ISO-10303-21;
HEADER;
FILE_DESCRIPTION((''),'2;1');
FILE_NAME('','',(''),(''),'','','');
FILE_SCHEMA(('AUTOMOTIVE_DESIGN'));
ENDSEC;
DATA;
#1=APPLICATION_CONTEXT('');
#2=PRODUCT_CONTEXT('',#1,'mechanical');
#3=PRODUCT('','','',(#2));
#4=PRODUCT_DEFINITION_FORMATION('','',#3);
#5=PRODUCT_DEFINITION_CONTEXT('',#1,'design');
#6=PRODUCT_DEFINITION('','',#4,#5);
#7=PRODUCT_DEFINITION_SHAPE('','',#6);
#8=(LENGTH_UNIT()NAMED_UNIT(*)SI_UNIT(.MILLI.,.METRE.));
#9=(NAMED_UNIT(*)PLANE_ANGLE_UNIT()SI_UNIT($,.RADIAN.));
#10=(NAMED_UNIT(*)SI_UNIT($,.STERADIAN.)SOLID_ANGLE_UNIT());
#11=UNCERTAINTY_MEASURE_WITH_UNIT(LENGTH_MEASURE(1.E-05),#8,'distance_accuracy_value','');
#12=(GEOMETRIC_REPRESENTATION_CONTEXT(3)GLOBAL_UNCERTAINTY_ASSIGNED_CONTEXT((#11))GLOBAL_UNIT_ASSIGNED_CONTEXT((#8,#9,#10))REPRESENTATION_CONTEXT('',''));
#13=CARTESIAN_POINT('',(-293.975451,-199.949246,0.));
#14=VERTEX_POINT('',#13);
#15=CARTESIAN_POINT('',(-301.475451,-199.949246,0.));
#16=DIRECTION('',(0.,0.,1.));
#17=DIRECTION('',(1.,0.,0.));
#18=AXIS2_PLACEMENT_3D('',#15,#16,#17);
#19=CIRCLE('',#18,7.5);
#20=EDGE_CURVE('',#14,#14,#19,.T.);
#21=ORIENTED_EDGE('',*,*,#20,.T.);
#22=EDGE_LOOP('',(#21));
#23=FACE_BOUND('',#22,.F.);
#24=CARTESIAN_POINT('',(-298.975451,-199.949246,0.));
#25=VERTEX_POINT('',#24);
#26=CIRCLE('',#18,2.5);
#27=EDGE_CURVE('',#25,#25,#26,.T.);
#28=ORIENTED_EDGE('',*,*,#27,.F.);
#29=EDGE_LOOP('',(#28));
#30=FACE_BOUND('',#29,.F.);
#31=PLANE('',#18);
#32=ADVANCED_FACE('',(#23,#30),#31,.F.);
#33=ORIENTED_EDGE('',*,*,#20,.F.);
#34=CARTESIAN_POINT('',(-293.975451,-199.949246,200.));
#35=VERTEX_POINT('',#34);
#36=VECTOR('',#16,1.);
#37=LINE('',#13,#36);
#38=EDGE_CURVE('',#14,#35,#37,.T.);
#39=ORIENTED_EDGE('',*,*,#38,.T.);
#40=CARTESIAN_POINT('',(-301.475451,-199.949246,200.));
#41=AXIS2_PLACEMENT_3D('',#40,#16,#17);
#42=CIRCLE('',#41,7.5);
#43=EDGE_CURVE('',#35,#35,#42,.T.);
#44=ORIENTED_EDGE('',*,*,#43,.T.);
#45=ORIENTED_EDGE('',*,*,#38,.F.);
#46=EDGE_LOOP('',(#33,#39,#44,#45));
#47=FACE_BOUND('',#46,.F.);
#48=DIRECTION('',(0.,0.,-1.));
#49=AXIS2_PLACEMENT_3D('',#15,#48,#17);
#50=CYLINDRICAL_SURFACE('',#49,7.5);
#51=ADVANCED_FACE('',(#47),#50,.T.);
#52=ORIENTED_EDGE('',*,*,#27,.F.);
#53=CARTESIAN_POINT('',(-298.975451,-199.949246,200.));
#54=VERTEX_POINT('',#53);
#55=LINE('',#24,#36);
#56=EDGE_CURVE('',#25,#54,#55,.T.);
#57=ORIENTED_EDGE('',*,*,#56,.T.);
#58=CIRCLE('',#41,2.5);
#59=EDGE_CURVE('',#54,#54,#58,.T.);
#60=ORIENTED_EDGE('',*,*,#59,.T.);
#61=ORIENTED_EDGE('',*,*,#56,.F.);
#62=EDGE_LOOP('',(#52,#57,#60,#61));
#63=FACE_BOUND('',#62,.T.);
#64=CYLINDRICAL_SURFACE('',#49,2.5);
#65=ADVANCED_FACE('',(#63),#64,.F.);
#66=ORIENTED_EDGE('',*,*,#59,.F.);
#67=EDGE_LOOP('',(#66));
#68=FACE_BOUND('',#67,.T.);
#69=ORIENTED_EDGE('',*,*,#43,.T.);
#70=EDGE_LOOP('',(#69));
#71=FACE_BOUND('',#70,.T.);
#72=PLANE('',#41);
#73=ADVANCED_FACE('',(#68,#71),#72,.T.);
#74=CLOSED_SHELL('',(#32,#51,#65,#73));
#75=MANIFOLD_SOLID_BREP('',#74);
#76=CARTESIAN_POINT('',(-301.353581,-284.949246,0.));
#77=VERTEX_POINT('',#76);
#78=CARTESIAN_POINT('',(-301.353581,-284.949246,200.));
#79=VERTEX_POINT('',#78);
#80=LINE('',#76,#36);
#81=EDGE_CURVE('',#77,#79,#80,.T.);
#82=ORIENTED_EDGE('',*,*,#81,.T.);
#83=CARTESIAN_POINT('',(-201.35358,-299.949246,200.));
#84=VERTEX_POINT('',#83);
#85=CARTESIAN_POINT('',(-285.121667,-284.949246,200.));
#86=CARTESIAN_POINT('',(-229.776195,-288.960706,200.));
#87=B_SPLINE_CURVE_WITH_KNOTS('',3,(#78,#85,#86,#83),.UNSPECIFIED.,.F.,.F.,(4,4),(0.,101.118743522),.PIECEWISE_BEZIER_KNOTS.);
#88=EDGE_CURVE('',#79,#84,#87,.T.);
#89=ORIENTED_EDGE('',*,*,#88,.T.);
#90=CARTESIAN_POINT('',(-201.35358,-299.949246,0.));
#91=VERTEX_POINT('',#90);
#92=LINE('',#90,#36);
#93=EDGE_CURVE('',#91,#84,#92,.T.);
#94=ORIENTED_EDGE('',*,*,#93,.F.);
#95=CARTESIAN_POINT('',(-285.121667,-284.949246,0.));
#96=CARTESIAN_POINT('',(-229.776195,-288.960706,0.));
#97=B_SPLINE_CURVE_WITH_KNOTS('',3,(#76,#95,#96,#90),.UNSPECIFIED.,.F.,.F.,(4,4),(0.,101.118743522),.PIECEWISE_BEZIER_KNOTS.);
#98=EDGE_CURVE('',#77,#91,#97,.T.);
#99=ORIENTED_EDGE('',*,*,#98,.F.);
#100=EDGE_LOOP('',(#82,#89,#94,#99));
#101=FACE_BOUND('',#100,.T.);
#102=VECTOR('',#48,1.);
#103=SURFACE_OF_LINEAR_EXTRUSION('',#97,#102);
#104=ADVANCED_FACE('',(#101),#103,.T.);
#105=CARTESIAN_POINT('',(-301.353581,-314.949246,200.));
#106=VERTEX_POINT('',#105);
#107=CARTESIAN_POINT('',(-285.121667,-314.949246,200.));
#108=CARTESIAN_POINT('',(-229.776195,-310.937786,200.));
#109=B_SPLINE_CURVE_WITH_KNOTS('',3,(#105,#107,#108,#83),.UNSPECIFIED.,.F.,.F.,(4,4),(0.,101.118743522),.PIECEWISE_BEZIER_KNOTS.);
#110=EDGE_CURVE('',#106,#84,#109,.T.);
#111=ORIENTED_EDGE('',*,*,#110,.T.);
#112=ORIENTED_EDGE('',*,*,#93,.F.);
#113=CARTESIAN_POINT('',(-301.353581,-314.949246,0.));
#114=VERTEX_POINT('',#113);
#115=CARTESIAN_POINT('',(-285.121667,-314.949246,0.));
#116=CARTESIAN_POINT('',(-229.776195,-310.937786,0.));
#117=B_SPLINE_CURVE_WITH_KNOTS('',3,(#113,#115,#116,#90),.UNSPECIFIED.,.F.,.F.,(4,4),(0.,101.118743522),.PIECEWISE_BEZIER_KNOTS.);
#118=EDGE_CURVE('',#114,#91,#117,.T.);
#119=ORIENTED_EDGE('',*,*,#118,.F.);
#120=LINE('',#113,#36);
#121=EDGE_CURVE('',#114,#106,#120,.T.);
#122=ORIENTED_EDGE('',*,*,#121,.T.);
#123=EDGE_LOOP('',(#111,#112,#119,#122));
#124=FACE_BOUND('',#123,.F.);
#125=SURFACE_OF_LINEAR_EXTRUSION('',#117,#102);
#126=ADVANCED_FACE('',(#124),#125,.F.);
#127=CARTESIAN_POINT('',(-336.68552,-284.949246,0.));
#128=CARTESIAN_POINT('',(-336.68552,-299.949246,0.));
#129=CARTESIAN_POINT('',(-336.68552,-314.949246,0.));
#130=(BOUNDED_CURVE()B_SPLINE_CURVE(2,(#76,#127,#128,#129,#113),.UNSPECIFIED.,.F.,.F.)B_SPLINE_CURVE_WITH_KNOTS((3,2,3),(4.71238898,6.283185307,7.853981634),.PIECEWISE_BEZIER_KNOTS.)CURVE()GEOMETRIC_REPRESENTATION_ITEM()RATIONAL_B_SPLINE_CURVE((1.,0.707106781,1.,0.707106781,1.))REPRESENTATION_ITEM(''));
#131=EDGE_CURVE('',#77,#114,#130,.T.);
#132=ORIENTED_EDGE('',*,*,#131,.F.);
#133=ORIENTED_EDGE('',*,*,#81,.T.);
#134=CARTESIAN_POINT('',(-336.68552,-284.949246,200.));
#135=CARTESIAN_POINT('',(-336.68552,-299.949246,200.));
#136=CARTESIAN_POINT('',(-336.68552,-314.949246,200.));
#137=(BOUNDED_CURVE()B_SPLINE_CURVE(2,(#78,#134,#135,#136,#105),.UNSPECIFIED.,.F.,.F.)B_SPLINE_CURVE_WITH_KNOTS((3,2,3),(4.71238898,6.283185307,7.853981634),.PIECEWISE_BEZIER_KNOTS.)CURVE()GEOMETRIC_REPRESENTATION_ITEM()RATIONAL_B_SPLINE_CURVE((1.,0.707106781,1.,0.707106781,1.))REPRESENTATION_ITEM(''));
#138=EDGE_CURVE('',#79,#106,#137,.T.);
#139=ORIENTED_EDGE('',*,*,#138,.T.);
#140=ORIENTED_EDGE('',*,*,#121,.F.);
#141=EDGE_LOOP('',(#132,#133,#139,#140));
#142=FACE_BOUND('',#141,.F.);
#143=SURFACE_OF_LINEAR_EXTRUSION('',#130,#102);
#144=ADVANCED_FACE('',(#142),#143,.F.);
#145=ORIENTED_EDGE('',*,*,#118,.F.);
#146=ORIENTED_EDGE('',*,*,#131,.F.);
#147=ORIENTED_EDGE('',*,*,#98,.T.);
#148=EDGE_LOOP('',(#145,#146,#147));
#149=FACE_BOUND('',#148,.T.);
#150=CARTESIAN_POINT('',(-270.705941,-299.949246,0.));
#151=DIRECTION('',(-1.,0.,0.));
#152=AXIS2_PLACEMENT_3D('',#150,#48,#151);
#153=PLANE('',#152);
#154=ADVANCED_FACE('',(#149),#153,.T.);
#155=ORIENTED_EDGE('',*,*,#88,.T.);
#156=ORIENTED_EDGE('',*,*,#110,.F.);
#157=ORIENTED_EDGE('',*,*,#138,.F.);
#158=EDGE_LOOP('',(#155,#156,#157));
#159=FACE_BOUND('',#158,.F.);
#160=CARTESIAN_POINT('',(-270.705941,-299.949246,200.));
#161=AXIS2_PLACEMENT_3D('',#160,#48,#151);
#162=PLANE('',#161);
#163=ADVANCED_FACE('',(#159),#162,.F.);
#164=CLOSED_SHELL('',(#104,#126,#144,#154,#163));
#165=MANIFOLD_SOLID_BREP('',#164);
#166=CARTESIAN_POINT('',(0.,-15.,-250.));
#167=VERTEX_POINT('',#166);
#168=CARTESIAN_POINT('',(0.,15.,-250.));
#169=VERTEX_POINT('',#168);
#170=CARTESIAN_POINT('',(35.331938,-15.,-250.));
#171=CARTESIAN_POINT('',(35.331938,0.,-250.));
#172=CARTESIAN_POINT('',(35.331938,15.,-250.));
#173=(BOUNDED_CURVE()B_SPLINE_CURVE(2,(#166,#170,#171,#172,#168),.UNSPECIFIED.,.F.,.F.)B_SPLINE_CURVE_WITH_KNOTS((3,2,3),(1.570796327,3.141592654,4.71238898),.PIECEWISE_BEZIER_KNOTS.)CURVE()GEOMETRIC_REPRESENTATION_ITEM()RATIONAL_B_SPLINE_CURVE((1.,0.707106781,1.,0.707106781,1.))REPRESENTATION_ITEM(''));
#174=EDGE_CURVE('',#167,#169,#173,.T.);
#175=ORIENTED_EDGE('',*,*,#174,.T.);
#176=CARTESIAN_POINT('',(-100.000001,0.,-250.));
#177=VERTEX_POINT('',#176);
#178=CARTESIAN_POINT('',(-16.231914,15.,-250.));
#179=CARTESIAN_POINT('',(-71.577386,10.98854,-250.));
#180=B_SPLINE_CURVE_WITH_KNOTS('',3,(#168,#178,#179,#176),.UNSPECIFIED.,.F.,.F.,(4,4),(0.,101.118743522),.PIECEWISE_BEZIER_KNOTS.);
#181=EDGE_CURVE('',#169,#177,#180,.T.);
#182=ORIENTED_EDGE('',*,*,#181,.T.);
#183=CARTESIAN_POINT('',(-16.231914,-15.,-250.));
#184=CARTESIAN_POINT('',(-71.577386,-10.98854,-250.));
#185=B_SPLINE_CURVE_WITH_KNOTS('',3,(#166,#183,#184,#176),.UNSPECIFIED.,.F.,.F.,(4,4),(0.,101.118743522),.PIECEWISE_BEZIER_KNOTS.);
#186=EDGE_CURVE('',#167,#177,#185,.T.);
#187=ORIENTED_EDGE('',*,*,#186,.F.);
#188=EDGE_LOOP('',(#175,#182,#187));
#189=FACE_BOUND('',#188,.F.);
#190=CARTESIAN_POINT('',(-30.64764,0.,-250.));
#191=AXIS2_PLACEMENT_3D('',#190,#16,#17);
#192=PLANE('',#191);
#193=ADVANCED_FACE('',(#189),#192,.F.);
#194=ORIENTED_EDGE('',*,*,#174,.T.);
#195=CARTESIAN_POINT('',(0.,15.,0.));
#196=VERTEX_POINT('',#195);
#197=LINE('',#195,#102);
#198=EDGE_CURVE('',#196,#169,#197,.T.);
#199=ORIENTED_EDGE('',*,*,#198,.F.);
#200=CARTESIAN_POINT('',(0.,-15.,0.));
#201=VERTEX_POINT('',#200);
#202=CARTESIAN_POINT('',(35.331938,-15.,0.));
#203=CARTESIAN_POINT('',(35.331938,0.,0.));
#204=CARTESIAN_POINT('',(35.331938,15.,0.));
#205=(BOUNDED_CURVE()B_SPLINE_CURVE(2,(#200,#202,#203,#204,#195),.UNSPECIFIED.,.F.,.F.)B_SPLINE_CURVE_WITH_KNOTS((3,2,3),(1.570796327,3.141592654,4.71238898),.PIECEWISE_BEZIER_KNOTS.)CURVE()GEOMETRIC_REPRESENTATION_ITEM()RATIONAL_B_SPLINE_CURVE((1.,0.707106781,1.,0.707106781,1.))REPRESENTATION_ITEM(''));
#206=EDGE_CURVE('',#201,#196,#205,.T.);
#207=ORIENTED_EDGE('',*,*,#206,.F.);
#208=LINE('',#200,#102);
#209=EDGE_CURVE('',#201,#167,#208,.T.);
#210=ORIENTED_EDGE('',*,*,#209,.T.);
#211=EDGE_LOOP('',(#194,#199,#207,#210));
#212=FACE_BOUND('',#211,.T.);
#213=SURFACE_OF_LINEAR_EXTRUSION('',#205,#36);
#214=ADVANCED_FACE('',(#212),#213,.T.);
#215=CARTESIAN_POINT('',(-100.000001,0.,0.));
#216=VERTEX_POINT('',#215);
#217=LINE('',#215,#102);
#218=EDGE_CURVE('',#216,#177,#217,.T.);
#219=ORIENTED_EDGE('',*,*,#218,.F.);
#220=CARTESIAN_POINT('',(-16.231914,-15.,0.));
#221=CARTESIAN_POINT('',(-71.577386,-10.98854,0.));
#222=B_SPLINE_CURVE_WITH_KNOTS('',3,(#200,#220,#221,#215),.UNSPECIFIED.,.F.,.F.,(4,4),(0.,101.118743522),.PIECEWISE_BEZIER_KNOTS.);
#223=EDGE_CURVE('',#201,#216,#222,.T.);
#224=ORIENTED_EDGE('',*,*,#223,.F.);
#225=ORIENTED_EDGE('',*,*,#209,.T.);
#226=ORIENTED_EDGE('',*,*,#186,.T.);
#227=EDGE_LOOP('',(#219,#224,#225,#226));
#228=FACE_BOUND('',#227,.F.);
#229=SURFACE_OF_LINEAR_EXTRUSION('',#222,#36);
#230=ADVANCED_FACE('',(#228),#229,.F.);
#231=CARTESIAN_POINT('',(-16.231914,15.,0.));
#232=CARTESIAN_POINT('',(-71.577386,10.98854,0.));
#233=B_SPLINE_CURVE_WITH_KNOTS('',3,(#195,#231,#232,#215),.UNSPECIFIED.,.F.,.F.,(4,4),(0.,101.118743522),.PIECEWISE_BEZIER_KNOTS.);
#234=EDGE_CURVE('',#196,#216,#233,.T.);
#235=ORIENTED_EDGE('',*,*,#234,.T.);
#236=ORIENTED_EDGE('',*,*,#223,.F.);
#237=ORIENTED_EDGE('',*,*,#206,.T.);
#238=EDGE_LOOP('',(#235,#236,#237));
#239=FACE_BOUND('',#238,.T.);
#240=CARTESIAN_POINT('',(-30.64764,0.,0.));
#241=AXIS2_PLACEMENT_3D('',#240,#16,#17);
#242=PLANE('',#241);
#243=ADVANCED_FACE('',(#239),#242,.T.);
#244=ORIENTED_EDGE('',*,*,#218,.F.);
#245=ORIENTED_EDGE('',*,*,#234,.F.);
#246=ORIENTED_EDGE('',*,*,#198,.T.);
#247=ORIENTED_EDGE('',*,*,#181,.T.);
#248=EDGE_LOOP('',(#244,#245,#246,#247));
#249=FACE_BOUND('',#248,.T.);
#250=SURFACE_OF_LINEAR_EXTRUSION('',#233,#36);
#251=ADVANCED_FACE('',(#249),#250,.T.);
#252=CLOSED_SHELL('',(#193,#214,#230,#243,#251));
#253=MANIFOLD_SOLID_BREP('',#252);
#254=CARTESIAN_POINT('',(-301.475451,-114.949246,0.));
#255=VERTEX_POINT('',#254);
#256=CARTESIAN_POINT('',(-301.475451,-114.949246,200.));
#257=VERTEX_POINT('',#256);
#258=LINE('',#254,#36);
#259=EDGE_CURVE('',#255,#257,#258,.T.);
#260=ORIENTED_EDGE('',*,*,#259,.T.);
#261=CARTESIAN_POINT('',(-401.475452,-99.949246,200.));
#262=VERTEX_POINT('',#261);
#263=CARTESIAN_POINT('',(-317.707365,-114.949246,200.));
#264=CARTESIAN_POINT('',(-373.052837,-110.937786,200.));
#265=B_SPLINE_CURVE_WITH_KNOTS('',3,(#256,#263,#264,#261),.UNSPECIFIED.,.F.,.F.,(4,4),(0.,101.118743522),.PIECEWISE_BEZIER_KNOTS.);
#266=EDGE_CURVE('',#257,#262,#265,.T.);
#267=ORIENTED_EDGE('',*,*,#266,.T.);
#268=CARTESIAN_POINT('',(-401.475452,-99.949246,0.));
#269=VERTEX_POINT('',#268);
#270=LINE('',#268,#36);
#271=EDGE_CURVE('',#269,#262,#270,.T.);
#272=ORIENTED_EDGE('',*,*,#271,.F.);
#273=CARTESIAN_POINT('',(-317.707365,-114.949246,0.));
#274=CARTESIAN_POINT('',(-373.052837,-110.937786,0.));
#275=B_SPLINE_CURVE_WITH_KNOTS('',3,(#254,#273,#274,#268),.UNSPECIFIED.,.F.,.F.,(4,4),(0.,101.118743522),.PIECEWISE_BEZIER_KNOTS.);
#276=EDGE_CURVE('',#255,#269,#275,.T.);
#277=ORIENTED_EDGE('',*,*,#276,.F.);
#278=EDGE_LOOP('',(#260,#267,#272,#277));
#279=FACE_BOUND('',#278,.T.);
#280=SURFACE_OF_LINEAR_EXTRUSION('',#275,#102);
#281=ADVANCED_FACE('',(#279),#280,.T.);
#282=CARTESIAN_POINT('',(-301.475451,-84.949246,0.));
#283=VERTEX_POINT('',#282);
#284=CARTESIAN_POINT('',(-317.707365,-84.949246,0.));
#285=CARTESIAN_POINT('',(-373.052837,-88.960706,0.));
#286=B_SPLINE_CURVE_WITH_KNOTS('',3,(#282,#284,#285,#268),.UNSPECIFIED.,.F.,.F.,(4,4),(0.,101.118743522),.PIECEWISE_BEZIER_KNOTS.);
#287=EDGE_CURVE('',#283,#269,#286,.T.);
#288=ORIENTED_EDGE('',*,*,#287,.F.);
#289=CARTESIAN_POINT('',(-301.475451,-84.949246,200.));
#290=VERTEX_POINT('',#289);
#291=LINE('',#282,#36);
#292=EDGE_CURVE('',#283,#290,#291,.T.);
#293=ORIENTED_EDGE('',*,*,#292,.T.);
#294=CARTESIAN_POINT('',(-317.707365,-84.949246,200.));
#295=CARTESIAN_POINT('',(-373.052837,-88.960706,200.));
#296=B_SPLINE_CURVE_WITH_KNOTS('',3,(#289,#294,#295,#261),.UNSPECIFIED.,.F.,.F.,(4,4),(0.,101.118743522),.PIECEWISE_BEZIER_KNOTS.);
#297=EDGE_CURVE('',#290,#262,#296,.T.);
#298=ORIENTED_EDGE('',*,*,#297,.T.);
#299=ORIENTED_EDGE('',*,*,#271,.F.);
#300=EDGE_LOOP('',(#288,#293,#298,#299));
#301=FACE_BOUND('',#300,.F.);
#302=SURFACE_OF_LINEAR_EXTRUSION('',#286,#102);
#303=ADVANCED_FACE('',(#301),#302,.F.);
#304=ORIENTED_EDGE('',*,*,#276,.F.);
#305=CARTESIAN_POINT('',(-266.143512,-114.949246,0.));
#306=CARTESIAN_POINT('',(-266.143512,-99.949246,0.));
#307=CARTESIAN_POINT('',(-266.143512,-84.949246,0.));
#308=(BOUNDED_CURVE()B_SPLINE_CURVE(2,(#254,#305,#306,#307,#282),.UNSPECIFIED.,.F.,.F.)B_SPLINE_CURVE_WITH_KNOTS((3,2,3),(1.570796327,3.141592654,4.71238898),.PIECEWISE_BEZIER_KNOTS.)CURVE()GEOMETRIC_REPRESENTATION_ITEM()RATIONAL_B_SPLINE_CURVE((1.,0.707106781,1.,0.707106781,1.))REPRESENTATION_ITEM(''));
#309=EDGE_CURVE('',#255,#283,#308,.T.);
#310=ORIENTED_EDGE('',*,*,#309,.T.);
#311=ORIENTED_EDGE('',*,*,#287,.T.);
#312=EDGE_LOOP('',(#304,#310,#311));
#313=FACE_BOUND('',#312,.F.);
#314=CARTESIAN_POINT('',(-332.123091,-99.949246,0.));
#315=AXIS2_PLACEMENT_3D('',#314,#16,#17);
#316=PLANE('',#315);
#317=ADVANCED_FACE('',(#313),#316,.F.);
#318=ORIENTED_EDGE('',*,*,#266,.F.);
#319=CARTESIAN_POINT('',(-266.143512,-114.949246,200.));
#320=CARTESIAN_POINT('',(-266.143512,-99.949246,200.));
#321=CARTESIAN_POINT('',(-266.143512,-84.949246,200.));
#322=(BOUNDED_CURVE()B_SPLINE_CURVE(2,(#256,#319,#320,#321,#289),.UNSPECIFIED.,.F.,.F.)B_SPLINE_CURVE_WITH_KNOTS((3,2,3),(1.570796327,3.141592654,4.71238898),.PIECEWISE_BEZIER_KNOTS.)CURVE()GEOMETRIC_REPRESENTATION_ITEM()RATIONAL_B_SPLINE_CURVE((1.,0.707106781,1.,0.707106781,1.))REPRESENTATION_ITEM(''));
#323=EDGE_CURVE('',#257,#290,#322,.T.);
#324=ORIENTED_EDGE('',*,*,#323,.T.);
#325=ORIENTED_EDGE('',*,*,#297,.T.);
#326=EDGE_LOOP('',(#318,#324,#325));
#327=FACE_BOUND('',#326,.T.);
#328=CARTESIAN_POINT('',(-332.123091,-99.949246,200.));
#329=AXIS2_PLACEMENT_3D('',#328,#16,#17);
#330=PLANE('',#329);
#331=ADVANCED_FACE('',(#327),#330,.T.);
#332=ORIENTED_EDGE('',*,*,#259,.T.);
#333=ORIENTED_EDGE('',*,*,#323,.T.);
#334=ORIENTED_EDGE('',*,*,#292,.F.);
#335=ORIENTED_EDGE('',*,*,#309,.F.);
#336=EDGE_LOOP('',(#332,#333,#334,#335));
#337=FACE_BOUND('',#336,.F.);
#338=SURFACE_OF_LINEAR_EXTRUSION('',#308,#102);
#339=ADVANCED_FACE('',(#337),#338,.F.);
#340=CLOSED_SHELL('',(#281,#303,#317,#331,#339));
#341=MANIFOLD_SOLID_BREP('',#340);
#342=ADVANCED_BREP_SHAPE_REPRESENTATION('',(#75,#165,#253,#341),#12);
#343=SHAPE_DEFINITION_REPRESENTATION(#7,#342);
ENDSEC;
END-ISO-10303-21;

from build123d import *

# Parameters (mm, degrees)
F1_DEPTH = 250
F2_DEPTH = 200
F0_R     = 7.5
F0_R_2   = 2.5


# Not quite as in the source:
# - ends of sketch curves that miss each other by under 0.0002 mm in the source are joined
# - the program builds the solid bodies; features that only make, move or delete a surface that nothing else refers to are left out


with BuildPart() as f1:
    # F0 (on Top) → F1 (new body)
    with BuildSketch(Plane.XY):
        with BuildLine():
            add(Edge.make_bspline(
                [(0, -15), (35.3319384158, -15), (35.3319384158, 0), (35.3319384158, 15), (0, 15)],
                knots=[1.5707963268, 1.5707963268, 1.5707963268, 3.1415926536, 3.1415926536, 4.7123889804, 4.7123889804, 4.7123889804], degree=2, weights=[1, 0.7071067812, 1, 0.7071067812, 1]))
            add(Edge.make_bspline(
                [(0, 15), (-16.2319140521, 15.0000000963), (-71.5773864947, 10.9885398261), (-100.0000014291, -1.909e-07)],
                knots=[0, 0, 0, 0, 101.1187435224, 101.1187435224, 101.1187435224, 101.1187435224], degree=3))
            add(Edge.make_bspline(
                [(0, -15), (-16.2319140521, -15.0000000963), (-71.5773864947, -10.9885398261), (-100.0000014291, -1.909e-07)],
                knots=[0, 0, 0, 0, 101.1187435224, 101.1187435224, 101.1187435224, 101.1187435224], degree=3))
        make_face()
    extrude(amount=-F1_DEPTH)


with BuildPart() as f2:
    # F0 (on Top) → F2 (new body)
    with BuildSketch(Plane.XY):
        with BuildLine():
            add(Edge.make_bspline(
                [(-301.4754507362, -114.9492457264), (-266.1435123205, -114.9492457264), (-266.1435123205, -99.9492457264), (-266.1435123205, -84.9492457264), (-301.4754507362, -84.9492457264)],
                knots=[1.5707963268, 1.5707963268, 1.5707963268, 3.1415926536, 3.1415926536, 4.7123889804, 4.7123889804, 4.7123889804], degree=2, weights=[1, 0.7071067812, 1, 0.7071067812, 1]))
            add(Edge.make_bspline(
                [(-301.4754507362, -84.9492457264), (-317.7073647883, -84.9492456301), (-373.0528372309, -88.9607059003), (-401.4754521653, -99.9492459173)],
                knots=[0, 0, 0, 0, 101.1187435224, 101.1187435224, 101.1187435224, 101.1187435224], degree=3))
            add(Edge.make_bspline(
                [(-301.4754507362, -114.9492457264), (-317.7073647883, -114.9492458228), (-373.0528372309, -110.9377855526), (-401.4754521653, -99.9492459173)],
                knots=[0, 0, 0, 0, 101.1187435224, 101.1187435224, 101.1187435224, 101.1187435224], degree=3))
        make_face()
    extrude(amount=F2_DEPTH)


with BuildPart() as f2b:
    # F0 (on Top) → F2, piece 2 (new body)
    with BuildSketch(Plane.XY):
        with BuildLine():
            add(Edge.make_bspline(
                [(-301.3535811887, -284.9492457264), (-285.1216671366, -284.9492456301), (-229.776194694, -288.9607059003), (-201.3535797596, -299.9492459173)],
                knots=[0, 0, 0, 0, 101.1187435224, 101.1187435224, 101.1187435224, 101.1187435224], degree=3))
            add(Edge.make_bspline(
                [(-301.3535811887, -284.9492457264), (-336.6855196045, -284.9492457264), (-336.6855196045, -299.9492457264), (-336.6855196045, -314.9492457264), (-301.3535811887, -314.9492457264)],
                knots=[4.7123889804, 4.7123889804, 4.7123889804, 6.2831853072, 6.2831853072, 7.853981634, 7.853981634, 7.853981634], degree=2, weights=[1, 0.7071067812, 1, 0.7071067812, 1]))
            add(Edge.make_bspline(
                [(-301.3535811887, -314.9492457264), (-285.1216671366, -314.9492458228), (-229.776194694, -310.9377855526), (-201.3535797596, -299.9492459173)],
                knots=[0, 0, 0, 0, 101.1187435224, 101.1187435224, 101.1187435224, 101.1187435224], degree=3))
        make_face()
    extrude(amount=F2_DEPTH)


with BuildPart() as f2c:
    # F0 (on Top) → F2, piece 3 (new body)
    with BuildSketch(Plane.XY):
        with Locations((-301.4754507362, -199.9492457264)):
            Circle(F0_R)
        with Locations((-301.4754507362, -199.9492457264)):
            Circle(F0_R_2, mode=Mode.SUBTRACT)
    extrude(amount=F2_DEPTH)


solid = Compound([f1.part, f2.part, f2b.part, f2c.part])
